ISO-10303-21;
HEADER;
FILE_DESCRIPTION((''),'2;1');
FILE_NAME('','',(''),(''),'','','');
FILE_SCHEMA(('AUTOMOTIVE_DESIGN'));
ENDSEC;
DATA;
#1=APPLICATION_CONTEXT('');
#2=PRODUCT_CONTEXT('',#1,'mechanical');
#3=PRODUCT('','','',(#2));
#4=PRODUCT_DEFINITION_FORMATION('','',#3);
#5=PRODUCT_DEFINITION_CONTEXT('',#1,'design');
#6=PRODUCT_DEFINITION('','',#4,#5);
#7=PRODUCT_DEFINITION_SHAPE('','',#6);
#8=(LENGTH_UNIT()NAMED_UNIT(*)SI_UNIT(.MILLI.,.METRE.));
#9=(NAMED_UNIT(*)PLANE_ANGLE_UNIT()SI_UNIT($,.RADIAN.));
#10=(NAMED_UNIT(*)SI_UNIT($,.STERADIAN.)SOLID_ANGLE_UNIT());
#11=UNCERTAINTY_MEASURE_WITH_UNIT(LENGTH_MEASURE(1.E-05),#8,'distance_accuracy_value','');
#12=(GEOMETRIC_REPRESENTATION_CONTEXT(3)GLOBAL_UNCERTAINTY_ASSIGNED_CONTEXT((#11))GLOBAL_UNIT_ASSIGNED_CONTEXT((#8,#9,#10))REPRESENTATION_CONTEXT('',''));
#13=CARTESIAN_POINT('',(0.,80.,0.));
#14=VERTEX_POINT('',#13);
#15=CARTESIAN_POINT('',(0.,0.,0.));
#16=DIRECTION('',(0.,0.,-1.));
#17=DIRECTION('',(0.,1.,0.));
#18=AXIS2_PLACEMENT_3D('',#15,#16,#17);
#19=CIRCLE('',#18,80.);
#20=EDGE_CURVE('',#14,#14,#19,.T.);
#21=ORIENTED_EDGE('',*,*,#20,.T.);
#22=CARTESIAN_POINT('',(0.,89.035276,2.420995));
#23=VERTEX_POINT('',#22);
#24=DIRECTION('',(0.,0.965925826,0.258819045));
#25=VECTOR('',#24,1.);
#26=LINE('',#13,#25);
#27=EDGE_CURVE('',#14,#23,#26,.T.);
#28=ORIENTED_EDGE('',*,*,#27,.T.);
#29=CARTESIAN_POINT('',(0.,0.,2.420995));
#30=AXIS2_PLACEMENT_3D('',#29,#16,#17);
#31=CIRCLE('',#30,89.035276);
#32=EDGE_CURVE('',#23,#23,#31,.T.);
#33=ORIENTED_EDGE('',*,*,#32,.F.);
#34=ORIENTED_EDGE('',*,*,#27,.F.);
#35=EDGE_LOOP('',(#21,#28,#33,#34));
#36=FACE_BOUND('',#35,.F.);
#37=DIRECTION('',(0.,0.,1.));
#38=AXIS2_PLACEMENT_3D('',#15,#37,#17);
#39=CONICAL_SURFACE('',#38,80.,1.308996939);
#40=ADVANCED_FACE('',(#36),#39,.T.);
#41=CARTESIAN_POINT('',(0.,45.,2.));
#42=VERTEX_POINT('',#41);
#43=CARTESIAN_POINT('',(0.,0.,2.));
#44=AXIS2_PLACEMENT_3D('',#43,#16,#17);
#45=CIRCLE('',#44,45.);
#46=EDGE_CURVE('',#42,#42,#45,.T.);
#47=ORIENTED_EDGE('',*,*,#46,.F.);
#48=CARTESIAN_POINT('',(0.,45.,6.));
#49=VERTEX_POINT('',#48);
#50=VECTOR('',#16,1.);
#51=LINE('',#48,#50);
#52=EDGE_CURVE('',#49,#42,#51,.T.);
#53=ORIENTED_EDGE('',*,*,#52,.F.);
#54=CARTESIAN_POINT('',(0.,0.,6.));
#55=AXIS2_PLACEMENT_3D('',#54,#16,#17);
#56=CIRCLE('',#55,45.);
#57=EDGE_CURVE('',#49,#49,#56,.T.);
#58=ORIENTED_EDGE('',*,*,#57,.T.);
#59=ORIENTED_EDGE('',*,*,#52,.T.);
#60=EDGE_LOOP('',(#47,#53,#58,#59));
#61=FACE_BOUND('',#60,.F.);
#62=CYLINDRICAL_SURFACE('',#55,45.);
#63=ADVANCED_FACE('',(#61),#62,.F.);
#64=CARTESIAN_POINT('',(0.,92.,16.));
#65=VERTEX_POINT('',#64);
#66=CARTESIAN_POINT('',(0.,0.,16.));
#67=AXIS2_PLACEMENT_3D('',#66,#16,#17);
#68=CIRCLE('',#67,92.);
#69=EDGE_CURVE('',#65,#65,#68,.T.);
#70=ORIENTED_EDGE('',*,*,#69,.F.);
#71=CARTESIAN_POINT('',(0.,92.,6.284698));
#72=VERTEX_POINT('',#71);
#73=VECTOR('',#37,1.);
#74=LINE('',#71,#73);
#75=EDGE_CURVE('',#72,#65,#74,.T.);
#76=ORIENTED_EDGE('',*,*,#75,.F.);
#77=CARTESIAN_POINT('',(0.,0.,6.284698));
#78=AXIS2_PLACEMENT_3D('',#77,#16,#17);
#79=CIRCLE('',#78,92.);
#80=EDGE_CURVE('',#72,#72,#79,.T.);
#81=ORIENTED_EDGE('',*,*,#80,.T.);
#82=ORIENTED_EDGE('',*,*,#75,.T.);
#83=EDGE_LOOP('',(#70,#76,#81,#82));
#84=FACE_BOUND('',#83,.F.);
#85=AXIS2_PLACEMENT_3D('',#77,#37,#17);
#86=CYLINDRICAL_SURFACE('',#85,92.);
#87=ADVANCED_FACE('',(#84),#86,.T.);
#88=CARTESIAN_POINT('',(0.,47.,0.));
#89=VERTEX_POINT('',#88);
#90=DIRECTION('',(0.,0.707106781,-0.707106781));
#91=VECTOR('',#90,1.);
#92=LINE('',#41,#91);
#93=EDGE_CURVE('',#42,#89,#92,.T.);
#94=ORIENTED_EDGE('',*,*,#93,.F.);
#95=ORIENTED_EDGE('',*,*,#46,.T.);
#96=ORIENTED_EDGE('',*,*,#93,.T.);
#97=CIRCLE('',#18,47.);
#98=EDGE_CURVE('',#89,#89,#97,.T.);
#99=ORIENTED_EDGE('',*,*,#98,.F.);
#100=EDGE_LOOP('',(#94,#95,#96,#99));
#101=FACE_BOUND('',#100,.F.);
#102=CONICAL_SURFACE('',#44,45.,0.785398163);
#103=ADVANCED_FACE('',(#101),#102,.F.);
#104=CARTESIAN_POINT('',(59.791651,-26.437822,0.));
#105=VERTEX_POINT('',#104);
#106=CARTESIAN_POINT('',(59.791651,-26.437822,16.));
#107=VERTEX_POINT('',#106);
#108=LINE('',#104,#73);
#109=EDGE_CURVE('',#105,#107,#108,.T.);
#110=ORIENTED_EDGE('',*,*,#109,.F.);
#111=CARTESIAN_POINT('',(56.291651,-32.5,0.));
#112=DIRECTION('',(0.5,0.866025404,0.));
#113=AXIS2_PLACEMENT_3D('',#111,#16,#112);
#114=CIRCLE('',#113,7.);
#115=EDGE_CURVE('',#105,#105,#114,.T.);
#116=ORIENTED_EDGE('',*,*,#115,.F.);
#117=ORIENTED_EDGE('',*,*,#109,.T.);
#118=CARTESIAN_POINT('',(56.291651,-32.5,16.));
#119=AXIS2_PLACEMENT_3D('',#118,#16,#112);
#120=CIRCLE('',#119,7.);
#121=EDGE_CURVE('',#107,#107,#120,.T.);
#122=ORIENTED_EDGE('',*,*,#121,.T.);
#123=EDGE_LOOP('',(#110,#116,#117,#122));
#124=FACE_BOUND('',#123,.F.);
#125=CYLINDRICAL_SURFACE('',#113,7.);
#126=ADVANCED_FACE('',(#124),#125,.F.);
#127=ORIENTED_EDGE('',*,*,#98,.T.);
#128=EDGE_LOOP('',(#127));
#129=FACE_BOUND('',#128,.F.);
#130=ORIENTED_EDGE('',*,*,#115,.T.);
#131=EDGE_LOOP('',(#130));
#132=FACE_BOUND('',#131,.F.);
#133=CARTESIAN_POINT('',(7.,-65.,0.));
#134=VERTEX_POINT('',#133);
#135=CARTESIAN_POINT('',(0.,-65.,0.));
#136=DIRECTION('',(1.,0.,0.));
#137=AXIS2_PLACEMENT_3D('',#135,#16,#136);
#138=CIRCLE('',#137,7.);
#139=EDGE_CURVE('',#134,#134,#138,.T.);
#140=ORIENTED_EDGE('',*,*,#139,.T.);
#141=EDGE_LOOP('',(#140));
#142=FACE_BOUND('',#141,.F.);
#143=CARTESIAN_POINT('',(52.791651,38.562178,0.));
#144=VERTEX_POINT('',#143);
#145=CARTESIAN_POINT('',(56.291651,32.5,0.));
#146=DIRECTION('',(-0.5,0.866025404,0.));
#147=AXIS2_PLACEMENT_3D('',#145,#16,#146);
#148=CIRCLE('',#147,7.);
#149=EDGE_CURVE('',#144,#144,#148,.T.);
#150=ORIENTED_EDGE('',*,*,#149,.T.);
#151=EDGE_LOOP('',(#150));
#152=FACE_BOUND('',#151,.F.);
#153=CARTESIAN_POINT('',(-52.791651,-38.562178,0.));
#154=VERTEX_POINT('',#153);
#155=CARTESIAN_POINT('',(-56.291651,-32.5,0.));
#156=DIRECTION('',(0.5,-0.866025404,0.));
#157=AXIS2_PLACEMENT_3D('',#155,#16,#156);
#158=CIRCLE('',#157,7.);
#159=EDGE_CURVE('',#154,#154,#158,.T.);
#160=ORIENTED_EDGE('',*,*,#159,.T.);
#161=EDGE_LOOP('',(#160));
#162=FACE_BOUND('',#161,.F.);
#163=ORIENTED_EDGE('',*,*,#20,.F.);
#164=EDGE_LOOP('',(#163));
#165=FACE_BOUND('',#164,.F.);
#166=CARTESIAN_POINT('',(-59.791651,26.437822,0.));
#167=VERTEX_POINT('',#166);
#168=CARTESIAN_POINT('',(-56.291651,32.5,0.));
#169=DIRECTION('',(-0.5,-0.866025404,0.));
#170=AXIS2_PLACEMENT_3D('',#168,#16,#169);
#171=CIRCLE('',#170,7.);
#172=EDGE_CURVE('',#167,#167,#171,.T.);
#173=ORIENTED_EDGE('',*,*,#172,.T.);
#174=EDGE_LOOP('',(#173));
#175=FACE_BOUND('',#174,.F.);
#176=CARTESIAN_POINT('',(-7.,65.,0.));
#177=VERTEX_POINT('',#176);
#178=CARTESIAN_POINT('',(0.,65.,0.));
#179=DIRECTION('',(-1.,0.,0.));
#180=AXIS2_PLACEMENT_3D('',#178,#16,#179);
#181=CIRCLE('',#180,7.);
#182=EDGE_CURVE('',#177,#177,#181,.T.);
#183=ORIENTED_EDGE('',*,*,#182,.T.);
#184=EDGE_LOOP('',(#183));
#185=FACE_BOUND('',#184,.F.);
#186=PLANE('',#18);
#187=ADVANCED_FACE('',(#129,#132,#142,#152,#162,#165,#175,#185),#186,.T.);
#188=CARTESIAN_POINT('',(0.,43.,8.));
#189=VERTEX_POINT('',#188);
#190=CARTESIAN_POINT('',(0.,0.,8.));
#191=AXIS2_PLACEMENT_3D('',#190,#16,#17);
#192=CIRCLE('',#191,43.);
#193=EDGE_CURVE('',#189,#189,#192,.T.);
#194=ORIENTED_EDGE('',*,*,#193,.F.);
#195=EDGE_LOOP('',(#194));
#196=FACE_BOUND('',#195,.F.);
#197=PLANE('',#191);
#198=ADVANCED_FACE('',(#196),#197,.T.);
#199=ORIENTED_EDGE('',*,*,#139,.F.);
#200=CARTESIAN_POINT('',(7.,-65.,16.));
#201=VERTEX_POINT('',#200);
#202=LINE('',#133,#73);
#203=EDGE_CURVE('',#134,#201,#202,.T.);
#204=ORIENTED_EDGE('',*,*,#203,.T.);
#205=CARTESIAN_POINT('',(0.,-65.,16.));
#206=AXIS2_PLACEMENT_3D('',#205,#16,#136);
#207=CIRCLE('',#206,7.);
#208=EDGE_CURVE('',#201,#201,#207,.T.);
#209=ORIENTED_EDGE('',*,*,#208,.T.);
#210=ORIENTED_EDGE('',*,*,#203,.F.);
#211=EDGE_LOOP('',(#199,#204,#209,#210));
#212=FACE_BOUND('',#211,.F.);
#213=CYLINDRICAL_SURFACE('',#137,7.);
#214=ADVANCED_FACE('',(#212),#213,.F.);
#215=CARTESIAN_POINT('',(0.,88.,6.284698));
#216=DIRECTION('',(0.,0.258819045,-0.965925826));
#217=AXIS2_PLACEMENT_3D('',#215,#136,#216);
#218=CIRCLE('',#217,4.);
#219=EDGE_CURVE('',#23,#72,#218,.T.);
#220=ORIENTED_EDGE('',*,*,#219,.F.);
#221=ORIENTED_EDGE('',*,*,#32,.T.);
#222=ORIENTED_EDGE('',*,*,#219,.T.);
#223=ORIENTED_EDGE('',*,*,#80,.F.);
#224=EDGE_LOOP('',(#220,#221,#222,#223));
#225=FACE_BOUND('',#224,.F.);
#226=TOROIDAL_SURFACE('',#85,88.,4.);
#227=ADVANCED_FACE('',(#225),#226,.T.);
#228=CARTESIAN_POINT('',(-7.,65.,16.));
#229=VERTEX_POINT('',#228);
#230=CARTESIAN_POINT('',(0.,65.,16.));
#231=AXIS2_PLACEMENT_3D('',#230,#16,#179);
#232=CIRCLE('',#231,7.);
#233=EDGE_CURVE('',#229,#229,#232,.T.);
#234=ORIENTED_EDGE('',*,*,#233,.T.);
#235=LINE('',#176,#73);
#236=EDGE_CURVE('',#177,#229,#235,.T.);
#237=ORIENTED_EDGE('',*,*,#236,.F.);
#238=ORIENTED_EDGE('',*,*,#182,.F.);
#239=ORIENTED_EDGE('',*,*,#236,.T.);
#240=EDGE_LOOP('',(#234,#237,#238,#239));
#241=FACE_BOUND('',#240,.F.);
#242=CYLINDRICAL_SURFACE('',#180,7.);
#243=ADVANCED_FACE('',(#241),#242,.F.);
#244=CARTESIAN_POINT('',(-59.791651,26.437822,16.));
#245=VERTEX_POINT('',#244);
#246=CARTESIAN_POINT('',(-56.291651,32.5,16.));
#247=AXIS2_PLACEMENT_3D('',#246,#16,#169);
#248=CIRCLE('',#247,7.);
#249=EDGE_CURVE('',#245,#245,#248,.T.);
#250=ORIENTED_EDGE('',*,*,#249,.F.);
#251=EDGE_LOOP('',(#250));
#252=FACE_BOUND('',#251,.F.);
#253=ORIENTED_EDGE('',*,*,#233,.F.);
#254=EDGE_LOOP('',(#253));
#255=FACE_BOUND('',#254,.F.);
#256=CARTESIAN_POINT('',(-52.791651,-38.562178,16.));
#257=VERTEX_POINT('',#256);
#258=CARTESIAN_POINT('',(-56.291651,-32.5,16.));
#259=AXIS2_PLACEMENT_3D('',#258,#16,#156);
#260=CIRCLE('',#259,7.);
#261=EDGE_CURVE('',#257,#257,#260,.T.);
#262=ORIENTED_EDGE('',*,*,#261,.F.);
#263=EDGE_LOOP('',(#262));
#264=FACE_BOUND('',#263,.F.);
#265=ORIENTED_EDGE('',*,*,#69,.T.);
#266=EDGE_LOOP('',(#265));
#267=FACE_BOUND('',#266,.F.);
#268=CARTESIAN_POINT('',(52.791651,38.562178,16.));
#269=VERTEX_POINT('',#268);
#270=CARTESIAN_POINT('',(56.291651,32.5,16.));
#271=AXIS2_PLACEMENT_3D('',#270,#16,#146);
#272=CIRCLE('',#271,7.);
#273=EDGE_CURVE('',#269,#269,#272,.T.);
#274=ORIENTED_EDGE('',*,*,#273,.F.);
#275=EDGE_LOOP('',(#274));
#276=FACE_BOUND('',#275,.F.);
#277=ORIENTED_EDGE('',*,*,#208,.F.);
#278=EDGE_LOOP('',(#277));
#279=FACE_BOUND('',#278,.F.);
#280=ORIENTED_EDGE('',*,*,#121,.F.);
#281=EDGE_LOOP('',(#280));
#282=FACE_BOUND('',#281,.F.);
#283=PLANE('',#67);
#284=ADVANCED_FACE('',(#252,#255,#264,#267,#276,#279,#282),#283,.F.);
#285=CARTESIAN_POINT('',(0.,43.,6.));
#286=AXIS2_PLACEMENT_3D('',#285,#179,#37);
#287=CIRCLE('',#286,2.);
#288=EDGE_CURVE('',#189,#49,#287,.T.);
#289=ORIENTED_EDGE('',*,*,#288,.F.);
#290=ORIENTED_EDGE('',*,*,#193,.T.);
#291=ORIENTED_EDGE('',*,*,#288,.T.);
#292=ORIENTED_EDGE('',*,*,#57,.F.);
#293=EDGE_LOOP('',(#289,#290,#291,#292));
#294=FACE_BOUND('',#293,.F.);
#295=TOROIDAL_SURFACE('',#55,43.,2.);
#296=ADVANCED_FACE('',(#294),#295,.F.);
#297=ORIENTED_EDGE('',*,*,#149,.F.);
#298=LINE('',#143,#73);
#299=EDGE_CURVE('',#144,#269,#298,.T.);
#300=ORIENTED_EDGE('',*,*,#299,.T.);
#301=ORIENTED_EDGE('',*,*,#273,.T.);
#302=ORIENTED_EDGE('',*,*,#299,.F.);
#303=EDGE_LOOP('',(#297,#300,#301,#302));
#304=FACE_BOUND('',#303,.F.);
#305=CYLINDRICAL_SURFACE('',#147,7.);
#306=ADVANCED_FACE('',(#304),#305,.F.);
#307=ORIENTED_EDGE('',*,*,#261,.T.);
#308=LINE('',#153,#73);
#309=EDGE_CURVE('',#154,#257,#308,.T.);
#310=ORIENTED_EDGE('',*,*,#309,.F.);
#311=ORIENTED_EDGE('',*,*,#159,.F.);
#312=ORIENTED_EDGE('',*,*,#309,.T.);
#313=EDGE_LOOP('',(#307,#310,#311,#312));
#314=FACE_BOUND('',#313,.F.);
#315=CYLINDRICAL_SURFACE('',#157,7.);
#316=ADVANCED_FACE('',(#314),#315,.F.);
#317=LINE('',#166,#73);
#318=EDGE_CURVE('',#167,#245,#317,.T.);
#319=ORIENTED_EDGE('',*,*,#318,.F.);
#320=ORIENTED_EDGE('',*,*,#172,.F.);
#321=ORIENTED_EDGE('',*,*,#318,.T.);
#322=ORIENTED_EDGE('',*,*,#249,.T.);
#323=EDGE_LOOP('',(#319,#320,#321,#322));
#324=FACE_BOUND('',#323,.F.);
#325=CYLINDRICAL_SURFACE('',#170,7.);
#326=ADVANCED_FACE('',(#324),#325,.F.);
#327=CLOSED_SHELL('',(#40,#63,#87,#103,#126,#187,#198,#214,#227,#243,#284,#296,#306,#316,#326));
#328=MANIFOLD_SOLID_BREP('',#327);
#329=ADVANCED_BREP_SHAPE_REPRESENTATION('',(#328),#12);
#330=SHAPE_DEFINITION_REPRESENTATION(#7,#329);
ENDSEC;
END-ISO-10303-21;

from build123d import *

# Parameters (mm, degrees)
F2_SIZE2        = 2
F2_SIZE         = 2
F3_R            = 7
F4_DEPTH        = 25
F4_COPIES_COUNT = 6


# Not quite as in the source:
# - a pattern or mirror of a feature is missing from the dataset's text; its kind, count and spacing are read off the source's solid


with BuildPart() as f1:
    # F0 (on Right) → F1 (revolve)
    with BuildSketch(Plane.YZ):
        with BuildLine():
            Line((92, 16), (0, 16))
            Line((0, 16), (0, 8))
            Line((0, 8), (43, 8))
            ThreePointArc((43, 8), (44.4142135624, 7.4142135624), (45, 6))
            Line((45, 6), (45, 0))
            Line((45, 0), (80, 0))
            Line((80, 0), (89.0352761804, 2.4209949559))
            ThreePointArc((89.0352761804, 2.4209949559), (91.1734133612, 3.8496525451), (92, 6.2846982611))
            Line((92, 6.2846982611), (92, 16))
        make_face()
    revolve(axis=Axis((0, 0, 0.8759116049), (0, 0, -1)))

    # F2
    f2_edges = [f1.edges().sort_by_distance(p)[0] for p in [
        (0, -45, 0),
    ]]
    chamfer(f2_edges, length=F2_SIZE, length2=F2_SIZE2)

    # F3 (on face) → F4 (cut)
    with BuildSketch(Plane(origin=(0, 0, 0), x_dir=(1, 0, 0), z_dir=(0, 0, -1))):
        with Locations((0, 65)):
            Circle(F3_R)
    f4 = extrude(amount=-F4_DEPTH, mode=Mode.SUBTRACT)

    # F4_copies: F4 ×6 about axis
    f4_copies_axis = Axis((0, 0, 0), (0, 0, 1))
    for i in range(1, F4_COPIES_COUNT):
        add(f4.rotate(f4_copies_axis, i * 360 / F4_COPIES_COUNT), mode=Mode.SUBTRACT)


solid = f1.part
